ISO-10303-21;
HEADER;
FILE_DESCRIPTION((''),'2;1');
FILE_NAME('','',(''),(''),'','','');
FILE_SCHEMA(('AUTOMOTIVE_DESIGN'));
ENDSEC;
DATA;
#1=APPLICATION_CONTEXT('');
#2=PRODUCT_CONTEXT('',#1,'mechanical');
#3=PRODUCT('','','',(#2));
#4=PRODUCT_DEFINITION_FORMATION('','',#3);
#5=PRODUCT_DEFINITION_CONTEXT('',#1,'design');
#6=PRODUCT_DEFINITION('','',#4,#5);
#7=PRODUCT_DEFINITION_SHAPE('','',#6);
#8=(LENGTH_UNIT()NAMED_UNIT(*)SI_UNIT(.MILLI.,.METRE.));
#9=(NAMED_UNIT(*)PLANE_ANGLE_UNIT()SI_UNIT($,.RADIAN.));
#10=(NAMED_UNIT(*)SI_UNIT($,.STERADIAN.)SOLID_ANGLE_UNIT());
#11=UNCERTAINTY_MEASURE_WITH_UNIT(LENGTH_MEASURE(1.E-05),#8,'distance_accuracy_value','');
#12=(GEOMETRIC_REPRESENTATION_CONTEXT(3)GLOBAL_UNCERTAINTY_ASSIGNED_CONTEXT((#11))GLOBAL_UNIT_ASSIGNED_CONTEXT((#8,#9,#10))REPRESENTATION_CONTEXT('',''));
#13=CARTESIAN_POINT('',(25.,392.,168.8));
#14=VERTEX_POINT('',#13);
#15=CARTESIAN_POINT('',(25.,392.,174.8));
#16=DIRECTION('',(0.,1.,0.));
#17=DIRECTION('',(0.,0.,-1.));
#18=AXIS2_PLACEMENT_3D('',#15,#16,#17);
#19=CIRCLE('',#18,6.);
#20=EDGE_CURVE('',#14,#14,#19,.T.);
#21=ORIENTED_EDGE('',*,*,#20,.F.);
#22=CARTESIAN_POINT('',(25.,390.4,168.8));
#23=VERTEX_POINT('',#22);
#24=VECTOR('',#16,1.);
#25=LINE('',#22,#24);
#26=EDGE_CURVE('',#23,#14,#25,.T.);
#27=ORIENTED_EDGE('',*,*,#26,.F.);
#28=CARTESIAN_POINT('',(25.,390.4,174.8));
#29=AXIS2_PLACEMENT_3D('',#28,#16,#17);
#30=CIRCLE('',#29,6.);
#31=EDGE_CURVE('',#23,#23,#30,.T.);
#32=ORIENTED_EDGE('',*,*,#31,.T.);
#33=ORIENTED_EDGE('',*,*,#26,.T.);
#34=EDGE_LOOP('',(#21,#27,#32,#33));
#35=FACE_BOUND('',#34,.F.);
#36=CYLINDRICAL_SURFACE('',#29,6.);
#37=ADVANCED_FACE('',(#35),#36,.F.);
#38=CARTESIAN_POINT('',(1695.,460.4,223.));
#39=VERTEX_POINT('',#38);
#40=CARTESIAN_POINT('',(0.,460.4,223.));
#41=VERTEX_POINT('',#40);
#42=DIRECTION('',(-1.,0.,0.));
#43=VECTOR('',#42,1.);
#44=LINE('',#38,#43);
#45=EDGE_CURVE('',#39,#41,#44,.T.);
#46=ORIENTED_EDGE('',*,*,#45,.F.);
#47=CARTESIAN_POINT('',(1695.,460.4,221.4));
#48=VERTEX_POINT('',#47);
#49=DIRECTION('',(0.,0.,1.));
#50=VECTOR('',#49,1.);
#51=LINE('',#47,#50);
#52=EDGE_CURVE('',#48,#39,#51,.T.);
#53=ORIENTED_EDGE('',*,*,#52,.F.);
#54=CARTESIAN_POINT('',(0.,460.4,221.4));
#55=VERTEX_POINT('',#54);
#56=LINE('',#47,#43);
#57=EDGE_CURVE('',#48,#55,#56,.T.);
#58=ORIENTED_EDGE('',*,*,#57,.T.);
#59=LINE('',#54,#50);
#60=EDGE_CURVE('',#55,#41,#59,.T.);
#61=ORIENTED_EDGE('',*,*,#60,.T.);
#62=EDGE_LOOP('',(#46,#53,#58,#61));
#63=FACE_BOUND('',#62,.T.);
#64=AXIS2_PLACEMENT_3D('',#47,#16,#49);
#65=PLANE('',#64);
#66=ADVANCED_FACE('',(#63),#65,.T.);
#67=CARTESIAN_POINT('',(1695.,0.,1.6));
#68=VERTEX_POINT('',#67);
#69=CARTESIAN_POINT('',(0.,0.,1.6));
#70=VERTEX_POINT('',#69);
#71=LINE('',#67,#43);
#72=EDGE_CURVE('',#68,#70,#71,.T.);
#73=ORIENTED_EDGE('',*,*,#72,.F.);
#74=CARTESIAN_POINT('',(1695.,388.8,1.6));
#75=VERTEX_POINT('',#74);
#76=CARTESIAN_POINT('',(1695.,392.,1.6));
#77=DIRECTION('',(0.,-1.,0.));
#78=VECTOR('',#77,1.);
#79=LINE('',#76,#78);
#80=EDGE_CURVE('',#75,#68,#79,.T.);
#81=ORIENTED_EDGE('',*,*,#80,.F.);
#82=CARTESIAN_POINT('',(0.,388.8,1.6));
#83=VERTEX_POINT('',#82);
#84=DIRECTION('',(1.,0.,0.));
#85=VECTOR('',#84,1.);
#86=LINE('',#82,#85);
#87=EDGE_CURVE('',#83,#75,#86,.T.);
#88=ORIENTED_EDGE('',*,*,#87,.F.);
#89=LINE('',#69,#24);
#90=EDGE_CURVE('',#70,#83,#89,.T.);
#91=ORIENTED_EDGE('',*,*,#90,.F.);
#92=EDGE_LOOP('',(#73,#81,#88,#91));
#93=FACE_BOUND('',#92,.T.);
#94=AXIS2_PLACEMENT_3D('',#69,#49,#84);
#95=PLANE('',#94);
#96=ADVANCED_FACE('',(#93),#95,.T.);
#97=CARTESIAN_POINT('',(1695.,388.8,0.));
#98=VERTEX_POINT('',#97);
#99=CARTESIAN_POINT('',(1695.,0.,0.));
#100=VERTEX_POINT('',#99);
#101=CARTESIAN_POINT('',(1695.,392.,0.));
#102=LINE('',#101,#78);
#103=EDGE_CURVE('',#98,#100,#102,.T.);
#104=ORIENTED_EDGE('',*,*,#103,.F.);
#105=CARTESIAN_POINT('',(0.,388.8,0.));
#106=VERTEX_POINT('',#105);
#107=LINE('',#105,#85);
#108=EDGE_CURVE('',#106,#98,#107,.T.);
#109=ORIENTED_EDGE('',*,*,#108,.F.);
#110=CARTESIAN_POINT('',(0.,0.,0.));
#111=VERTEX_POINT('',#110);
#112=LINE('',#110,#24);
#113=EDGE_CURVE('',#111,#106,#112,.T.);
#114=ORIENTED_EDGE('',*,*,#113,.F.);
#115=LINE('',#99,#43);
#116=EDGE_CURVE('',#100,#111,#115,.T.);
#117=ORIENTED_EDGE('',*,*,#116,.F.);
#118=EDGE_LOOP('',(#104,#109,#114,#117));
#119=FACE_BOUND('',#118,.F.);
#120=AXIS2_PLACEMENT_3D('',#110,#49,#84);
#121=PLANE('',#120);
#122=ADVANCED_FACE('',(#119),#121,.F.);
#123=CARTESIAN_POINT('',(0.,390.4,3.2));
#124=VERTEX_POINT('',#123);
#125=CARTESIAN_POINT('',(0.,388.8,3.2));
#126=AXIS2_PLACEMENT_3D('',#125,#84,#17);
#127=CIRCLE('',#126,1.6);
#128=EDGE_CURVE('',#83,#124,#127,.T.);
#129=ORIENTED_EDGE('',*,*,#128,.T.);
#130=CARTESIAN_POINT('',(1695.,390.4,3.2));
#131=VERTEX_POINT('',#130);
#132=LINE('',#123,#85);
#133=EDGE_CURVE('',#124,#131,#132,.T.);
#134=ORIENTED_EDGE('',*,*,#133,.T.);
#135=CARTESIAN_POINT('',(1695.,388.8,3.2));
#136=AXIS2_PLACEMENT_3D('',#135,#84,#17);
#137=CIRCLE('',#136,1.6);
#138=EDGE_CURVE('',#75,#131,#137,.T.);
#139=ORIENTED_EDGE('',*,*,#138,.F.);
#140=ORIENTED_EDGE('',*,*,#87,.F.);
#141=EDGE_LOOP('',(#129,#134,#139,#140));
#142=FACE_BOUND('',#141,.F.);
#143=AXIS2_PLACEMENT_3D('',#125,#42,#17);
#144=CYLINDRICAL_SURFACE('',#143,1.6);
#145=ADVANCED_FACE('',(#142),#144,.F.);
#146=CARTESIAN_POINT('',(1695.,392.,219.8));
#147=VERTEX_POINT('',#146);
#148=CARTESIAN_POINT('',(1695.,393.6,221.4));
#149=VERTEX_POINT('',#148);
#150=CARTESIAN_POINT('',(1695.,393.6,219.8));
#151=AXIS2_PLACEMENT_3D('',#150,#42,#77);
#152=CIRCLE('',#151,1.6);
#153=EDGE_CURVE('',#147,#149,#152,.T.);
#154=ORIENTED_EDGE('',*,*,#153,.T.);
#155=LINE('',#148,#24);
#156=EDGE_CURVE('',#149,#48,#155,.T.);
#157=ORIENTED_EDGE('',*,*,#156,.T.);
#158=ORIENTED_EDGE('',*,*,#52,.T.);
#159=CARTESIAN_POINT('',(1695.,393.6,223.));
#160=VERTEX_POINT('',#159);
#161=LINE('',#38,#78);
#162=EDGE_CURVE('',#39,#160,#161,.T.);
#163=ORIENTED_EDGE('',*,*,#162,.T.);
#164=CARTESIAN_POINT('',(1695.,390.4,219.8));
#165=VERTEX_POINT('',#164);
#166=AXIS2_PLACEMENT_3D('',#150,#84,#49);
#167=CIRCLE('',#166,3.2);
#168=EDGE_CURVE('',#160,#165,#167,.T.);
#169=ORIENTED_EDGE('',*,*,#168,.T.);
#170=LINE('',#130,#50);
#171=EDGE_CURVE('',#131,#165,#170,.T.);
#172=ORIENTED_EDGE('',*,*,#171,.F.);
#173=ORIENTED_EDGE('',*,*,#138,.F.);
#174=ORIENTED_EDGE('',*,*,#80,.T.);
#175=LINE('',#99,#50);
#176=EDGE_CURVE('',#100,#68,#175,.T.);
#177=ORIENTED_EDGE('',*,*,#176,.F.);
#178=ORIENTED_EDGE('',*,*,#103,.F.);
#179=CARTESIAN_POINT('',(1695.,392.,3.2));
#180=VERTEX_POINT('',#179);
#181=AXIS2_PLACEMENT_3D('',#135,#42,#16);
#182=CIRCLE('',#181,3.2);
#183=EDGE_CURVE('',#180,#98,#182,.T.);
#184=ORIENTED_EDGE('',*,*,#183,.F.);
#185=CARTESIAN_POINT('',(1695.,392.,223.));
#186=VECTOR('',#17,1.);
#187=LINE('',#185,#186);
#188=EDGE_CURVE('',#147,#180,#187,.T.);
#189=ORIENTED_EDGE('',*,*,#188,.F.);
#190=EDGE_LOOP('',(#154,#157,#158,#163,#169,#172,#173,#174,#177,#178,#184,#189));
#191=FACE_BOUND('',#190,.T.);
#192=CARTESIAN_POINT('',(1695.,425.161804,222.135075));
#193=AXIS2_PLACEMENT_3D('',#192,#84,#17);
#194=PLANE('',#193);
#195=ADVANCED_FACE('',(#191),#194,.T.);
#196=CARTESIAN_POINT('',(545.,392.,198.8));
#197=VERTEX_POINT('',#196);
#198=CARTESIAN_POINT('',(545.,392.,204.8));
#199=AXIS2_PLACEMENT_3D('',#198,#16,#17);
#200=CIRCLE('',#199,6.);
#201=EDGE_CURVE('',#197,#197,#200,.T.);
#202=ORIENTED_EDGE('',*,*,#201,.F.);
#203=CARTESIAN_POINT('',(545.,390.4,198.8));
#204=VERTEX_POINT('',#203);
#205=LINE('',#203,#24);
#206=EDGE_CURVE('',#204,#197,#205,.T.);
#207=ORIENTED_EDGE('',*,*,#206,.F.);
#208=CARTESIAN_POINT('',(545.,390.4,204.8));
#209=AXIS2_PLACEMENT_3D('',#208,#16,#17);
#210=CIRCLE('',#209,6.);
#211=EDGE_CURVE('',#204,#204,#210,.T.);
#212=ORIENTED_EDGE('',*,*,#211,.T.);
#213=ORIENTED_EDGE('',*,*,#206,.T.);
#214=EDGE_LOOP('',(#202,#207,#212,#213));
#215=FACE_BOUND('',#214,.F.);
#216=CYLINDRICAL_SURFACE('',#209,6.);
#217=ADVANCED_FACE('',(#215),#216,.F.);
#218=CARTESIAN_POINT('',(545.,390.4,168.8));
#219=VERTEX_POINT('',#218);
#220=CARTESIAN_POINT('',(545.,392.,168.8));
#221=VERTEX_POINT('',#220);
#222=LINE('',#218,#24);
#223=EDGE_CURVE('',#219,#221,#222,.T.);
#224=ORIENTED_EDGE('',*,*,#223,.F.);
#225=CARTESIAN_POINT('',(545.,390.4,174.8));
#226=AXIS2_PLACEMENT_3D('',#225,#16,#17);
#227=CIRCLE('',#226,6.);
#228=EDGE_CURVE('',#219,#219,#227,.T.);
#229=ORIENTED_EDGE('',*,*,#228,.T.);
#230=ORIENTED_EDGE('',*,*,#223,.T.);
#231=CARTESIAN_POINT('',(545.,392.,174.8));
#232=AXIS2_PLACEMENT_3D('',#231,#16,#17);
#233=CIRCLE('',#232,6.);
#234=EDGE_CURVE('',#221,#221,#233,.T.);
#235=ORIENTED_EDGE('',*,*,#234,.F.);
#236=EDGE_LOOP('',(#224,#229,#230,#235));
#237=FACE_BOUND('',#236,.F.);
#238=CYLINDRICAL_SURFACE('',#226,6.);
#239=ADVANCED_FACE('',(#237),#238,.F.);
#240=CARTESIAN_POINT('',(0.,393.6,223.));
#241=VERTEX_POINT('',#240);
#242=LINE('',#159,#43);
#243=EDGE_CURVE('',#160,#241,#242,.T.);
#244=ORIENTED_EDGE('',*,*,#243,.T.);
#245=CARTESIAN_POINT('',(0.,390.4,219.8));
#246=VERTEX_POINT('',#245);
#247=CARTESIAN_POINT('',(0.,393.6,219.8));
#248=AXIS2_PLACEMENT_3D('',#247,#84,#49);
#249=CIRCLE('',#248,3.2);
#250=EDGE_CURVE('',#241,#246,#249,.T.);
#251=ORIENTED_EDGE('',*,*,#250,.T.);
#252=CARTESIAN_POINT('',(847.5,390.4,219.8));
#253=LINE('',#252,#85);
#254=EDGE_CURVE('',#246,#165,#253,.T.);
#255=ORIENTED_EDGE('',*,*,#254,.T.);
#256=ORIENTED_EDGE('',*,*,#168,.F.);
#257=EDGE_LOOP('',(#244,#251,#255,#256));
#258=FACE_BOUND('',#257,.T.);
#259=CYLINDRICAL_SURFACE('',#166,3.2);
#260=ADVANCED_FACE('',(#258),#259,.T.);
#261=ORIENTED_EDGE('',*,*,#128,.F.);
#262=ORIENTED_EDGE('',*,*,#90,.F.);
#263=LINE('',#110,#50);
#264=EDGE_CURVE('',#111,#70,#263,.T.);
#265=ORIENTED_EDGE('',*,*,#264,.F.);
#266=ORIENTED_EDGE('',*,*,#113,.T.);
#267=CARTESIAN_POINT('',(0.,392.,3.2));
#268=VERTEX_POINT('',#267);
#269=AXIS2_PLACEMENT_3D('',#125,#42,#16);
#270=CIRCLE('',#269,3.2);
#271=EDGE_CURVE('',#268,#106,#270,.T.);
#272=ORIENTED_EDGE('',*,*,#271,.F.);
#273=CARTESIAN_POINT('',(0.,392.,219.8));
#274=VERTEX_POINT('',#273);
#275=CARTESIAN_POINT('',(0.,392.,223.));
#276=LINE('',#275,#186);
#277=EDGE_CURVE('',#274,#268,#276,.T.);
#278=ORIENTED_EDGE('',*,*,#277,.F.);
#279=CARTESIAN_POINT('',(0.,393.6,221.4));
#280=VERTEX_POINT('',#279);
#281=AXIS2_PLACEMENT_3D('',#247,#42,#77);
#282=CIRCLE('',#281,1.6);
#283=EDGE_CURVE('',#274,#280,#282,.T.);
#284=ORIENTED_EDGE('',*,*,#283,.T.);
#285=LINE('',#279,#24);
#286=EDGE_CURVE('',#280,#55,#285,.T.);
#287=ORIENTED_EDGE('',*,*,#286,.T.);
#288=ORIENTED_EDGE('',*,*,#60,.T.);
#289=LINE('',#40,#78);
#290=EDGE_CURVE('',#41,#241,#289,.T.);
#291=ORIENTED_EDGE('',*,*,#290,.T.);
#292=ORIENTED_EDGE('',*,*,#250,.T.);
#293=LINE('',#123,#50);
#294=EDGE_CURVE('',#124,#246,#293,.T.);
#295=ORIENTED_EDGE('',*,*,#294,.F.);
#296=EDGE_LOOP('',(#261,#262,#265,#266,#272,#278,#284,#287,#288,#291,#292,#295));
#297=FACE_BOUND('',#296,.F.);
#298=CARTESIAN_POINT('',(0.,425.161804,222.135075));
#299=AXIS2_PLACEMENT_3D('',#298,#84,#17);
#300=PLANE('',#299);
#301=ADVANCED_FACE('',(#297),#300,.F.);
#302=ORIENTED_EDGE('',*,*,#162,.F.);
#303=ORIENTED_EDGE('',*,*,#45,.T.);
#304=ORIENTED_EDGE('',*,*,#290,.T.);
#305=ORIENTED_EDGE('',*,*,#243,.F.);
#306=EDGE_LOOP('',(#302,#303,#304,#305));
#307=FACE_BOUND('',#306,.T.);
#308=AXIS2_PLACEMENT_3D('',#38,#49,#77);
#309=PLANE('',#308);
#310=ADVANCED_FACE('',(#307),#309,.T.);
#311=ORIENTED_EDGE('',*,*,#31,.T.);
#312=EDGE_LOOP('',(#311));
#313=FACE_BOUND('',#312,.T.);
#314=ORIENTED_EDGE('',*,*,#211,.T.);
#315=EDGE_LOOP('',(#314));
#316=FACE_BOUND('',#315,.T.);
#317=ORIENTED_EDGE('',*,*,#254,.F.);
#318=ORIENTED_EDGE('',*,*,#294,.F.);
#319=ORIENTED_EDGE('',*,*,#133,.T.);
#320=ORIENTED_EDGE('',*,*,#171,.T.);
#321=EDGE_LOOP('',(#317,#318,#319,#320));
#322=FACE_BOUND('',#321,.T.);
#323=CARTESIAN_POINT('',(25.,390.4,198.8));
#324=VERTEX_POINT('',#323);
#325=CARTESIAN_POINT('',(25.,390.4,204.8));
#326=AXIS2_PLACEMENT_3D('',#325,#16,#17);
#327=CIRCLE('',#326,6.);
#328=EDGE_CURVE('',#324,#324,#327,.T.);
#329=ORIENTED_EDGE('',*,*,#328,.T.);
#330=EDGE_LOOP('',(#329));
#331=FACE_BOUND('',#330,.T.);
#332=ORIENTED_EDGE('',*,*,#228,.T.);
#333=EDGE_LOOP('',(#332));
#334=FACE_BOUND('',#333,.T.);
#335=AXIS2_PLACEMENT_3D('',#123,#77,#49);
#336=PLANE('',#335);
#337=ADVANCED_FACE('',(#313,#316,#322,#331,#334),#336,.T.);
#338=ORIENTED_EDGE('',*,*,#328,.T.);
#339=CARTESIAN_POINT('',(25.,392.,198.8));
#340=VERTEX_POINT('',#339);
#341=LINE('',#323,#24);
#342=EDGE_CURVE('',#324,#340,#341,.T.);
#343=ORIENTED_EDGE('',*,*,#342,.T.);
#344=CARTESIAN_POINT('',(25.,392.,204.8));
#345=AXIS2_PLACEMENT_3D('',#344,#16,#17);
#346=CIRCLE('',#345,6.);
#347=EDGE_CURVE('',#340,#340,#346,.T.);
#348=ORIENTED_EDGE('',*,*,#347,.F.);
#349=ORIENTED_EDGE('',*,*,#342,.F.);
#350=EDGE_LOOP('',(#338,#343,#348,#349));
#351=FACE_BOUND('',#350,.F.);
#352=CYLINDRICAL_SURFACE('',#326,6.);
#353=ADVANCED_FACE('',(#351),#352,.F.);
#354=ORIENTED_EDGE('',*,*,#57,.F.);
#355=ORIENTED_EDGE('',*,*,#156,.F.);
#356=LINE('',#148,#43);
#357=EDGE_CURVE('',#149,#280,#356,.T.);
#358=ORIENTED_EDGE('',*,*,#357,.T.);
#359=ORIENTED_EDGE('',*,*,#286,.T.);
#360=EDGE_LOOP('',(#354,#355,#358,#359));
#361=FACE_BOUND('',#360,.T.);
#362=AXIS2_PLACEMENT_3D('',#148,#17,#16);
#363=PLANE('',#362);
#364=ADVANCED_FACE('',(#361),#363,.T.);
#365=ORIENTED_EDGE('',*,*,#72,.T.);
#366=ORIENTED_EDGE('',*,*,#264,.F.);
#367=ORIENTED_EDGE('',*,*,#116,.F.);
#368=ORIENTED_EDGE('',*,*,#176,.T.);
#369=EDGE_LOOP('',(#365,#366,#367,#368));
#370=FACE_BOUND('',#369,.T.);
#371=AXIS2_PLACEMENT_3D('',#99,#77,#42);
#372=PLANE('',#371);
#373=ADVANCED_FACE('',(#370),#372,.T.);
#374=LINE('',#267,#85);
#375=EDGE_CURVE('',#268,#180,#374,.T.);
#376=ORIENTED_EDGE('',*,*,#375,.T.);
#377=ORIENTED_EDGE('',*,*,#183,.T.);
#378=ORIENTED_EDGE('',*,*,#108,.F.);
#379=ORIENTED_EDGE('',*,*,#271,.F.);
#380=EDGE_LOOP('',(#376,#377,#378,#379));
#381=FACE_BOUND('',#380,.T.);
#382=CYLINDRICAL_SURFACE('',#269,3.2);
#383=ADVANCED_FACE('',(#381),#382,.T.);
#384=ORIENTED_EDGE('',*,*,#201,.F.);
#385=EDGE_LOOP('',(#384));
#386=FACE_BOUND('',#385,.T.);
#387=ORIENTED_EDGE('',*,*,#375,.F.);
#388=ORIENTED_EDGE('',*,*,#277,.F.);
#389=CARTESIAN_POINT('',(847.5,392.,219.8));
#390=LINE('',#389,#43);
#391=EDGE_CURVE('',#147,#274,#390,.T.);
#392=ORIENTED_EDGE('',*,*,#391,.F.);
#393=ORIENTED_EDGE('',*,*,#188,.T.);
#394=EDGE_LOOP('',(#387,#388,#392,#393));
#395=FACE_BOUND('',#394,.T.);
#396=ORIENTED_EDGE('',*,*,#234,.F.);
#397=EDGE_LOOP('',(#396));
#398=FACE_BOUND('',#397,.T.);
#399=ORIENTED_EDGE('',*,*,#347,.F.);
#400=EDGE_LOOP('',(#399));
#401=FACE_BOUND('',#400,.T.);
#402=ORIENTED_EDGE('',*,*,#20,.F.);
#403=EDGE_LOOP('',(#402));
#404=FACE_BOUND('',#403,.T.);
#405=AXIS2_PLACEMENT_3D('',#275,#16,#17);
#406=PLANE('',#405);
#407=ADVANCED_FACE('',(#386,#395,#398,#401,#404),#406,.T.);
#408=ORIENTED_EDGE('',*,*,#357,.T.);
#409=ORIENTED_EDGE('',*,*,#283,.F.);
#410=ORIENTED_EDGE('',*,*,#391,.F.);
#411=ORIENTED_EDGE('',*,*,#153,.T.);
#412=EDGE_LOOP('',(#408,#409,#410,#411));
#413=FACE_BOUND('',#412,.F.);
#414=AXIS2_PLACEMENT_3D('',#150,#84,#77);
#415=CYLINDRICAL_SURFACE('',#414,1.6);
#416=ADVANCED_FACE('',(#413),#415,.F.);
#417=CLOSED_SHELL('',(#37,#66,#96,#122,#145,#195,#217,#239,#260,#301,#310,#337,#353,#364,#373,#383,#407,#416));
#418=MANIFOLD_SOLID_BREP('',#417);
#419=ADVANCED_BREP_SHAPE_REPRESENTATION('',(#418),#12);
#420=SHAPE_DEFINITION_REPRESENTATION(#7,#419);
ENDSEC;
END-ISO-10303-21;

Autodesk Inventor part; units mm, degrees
ref_plane "YZ Plane" through (0, 0, 0) normal (1, 0, 0) x (0, 1, 0)
ref_plane "XZ Plane" through (0, 0, 0) normal (0, 1, 0) x (-1, 0, 0)
ref_plane "XY Plane" through (0, 0, 0) normal (0, 0, 1) x (1, 0, 0)
sketch "Sketch1" plane through (0, 0, 0) normal (0, 0, 1) x (1, 0, 0)
  line L0 (0, 0) -> (0, 392)
  line L1 (0, 392) -> (1695, 392)
  line L2 (1695, 392) -> (1695, 0)
  line L3 (1695, 0) -> (0, 0)
  dimension "d0" = 392
  dimension "d1" = 1695
extrude "Plate1" add sketch "Sketch1" along normal blind 1.6
sketch "Sketch2" plane through (1695, 390.4, 0) normal (0, 1, 0) x (-1, 0, 0)
  line L0 (1695, 0) -> (0, 0)
  line L1 (0, 0) -> (0, -223)
  line L2 (0, -223) -> (1695, -223)
  line L3 (1695, -223) -> (1695, 0)
edge flange "Flange1" height 223 angle 90 thickness 1.6 bend radius 1.6 thickness toward (0, 1, 0) relief tear relief width 1.6 relief depth 0.8 edges at (847.5, 392, 0) wall of the first edge with corners at (0, 390.4, 0) (1695, 390.4, 0) (1695, 390.4, 223) (0, 390.4, 223)
bend "Bend1"
corner "Corner1"
sketch "Sketch3" plane through (0, 390.4, 221.4) normal (0, 0, 1) x (1, 0, 0)
  line L0 (1695, 0) -> (0, 0)
  line L1 (0, 0) -> (0, -70)
  line L2 (0, -70) -> (1695, -70)
  line L3 (1695, -70) -> (1695, 0)
edge flange "Flange2" height 70 angle -90 thickness 1.6 bend radius 1.6 thickness toward (0, 0, 1) relief tear relief width 1.6 relief depth 0.8 edges at (847.5, 390.4, 223) wall of the first edge with corners at (1695, 390.4, 221.4) (0, 390.4, 221.4) (0, 460.4, 221.4) (1695, 460.4, 221.4)
bend "Bend2"
corner "Corner2"
sketch "Sketch4" plane through (0, 390.4, 3.2) normal (0, -1, 0) x (1, 0, 0)
  line L0 (0, 0) -> (0, 216.6) projected
  line L1 (0, 216.6) -> (0, 156.6)
  line L2 (0, 156.6) -> (1695, 156.6)
  line L3 (1695, 216.6) -> (1695, 0) projected
  line L4 (1695, 216.6) -> (0, 216.6) projected
  line L5 (1695, 156.6) -> (1695, 216.6)
  line L6 (1695, 216.6) -> (0, 216.6)
  circle A0 centre (25, 201.6) radius 6
  circle A1 centre (25, 171.6) radius 6
  circle A2 centre (545, 201.6) radius 6
  circle A3 centre (545, 171.6) radius 6
  line L7 (0, 156.6) -> (570, 156.6)
  line L8 (570, 156.6) -> (570, 216.6)
  point P0 (0, -3.2)
  dimension "d23" = 60
  dimension "d24" = 12
  dimension "d25" = 12
  dimension "d26" = 25
  dimension "d27" = 25
  dimension "d28" = 15
  dimension "d29" = 15
  dimension "d30" = 12
  dimension "d31" = 12
  dimension "d41" = 570
  dimension "d42" = 15
  dimension "d43" = 15
  dimension "d44" = 25
  dimension "d45" = 25
hole "Hole1" at (25, 390.4, 204.8) at (25, 390.4, 174.8) at (545, 390.4, 204.8) at (545, 390.4, 174.8) direction (0, 1, 0) diameter 12 end through all
equation "\"d39\" = Thickness"
equation "\"d3\" = BendReliefWidth"
equation "\"d4\" = BendReliefDepth"
equation "\"d5\" = MinimumRemnant"
equation "\"d6\" = BendRadius"
equation "\"d9\" = BendRadius"
equation "\"d10\" = CornerReliefSize"
equation "\"d11\" = GapSize"
equation "\"d12\" = JacobiRadiusSize"
equation "\"d13\" = BendReliefWidth"
equation "\"d14\" = BendReliefDepth"
equation "\"d15\" = MinimumRemnant"
equation "\"d16\" = BendRadius"
equation "\"d19\" = BendRadius"
equation "\"d20\" = CornerReliefSize"
equation "\"d21\" = GapSize"
equation "\"d22\" = JacobiRadiusSize"
equation "\"BendRadius\" = Thickness"
equation "\"BendReliefWidth\" = Thickness"
equation "\"BendReliefDepth\" = 0.5 * Thickness"
equation "\"CornerReliefSize\" = 4 * Thickness"
equation "\"MinimumRemnant\" = 2 * Thickness"
equation "\"TransitionRadius\" = BendRadius"
equation "\"JacobiRadiusSize\" = BendRadius"
equation "\"GapSize\" = Thickness"
equation "\"d2\" = BendRadius"
equation "\"Thickness\" = 1.6"
properties part number "MC Part4" material "Steel, Mild"
